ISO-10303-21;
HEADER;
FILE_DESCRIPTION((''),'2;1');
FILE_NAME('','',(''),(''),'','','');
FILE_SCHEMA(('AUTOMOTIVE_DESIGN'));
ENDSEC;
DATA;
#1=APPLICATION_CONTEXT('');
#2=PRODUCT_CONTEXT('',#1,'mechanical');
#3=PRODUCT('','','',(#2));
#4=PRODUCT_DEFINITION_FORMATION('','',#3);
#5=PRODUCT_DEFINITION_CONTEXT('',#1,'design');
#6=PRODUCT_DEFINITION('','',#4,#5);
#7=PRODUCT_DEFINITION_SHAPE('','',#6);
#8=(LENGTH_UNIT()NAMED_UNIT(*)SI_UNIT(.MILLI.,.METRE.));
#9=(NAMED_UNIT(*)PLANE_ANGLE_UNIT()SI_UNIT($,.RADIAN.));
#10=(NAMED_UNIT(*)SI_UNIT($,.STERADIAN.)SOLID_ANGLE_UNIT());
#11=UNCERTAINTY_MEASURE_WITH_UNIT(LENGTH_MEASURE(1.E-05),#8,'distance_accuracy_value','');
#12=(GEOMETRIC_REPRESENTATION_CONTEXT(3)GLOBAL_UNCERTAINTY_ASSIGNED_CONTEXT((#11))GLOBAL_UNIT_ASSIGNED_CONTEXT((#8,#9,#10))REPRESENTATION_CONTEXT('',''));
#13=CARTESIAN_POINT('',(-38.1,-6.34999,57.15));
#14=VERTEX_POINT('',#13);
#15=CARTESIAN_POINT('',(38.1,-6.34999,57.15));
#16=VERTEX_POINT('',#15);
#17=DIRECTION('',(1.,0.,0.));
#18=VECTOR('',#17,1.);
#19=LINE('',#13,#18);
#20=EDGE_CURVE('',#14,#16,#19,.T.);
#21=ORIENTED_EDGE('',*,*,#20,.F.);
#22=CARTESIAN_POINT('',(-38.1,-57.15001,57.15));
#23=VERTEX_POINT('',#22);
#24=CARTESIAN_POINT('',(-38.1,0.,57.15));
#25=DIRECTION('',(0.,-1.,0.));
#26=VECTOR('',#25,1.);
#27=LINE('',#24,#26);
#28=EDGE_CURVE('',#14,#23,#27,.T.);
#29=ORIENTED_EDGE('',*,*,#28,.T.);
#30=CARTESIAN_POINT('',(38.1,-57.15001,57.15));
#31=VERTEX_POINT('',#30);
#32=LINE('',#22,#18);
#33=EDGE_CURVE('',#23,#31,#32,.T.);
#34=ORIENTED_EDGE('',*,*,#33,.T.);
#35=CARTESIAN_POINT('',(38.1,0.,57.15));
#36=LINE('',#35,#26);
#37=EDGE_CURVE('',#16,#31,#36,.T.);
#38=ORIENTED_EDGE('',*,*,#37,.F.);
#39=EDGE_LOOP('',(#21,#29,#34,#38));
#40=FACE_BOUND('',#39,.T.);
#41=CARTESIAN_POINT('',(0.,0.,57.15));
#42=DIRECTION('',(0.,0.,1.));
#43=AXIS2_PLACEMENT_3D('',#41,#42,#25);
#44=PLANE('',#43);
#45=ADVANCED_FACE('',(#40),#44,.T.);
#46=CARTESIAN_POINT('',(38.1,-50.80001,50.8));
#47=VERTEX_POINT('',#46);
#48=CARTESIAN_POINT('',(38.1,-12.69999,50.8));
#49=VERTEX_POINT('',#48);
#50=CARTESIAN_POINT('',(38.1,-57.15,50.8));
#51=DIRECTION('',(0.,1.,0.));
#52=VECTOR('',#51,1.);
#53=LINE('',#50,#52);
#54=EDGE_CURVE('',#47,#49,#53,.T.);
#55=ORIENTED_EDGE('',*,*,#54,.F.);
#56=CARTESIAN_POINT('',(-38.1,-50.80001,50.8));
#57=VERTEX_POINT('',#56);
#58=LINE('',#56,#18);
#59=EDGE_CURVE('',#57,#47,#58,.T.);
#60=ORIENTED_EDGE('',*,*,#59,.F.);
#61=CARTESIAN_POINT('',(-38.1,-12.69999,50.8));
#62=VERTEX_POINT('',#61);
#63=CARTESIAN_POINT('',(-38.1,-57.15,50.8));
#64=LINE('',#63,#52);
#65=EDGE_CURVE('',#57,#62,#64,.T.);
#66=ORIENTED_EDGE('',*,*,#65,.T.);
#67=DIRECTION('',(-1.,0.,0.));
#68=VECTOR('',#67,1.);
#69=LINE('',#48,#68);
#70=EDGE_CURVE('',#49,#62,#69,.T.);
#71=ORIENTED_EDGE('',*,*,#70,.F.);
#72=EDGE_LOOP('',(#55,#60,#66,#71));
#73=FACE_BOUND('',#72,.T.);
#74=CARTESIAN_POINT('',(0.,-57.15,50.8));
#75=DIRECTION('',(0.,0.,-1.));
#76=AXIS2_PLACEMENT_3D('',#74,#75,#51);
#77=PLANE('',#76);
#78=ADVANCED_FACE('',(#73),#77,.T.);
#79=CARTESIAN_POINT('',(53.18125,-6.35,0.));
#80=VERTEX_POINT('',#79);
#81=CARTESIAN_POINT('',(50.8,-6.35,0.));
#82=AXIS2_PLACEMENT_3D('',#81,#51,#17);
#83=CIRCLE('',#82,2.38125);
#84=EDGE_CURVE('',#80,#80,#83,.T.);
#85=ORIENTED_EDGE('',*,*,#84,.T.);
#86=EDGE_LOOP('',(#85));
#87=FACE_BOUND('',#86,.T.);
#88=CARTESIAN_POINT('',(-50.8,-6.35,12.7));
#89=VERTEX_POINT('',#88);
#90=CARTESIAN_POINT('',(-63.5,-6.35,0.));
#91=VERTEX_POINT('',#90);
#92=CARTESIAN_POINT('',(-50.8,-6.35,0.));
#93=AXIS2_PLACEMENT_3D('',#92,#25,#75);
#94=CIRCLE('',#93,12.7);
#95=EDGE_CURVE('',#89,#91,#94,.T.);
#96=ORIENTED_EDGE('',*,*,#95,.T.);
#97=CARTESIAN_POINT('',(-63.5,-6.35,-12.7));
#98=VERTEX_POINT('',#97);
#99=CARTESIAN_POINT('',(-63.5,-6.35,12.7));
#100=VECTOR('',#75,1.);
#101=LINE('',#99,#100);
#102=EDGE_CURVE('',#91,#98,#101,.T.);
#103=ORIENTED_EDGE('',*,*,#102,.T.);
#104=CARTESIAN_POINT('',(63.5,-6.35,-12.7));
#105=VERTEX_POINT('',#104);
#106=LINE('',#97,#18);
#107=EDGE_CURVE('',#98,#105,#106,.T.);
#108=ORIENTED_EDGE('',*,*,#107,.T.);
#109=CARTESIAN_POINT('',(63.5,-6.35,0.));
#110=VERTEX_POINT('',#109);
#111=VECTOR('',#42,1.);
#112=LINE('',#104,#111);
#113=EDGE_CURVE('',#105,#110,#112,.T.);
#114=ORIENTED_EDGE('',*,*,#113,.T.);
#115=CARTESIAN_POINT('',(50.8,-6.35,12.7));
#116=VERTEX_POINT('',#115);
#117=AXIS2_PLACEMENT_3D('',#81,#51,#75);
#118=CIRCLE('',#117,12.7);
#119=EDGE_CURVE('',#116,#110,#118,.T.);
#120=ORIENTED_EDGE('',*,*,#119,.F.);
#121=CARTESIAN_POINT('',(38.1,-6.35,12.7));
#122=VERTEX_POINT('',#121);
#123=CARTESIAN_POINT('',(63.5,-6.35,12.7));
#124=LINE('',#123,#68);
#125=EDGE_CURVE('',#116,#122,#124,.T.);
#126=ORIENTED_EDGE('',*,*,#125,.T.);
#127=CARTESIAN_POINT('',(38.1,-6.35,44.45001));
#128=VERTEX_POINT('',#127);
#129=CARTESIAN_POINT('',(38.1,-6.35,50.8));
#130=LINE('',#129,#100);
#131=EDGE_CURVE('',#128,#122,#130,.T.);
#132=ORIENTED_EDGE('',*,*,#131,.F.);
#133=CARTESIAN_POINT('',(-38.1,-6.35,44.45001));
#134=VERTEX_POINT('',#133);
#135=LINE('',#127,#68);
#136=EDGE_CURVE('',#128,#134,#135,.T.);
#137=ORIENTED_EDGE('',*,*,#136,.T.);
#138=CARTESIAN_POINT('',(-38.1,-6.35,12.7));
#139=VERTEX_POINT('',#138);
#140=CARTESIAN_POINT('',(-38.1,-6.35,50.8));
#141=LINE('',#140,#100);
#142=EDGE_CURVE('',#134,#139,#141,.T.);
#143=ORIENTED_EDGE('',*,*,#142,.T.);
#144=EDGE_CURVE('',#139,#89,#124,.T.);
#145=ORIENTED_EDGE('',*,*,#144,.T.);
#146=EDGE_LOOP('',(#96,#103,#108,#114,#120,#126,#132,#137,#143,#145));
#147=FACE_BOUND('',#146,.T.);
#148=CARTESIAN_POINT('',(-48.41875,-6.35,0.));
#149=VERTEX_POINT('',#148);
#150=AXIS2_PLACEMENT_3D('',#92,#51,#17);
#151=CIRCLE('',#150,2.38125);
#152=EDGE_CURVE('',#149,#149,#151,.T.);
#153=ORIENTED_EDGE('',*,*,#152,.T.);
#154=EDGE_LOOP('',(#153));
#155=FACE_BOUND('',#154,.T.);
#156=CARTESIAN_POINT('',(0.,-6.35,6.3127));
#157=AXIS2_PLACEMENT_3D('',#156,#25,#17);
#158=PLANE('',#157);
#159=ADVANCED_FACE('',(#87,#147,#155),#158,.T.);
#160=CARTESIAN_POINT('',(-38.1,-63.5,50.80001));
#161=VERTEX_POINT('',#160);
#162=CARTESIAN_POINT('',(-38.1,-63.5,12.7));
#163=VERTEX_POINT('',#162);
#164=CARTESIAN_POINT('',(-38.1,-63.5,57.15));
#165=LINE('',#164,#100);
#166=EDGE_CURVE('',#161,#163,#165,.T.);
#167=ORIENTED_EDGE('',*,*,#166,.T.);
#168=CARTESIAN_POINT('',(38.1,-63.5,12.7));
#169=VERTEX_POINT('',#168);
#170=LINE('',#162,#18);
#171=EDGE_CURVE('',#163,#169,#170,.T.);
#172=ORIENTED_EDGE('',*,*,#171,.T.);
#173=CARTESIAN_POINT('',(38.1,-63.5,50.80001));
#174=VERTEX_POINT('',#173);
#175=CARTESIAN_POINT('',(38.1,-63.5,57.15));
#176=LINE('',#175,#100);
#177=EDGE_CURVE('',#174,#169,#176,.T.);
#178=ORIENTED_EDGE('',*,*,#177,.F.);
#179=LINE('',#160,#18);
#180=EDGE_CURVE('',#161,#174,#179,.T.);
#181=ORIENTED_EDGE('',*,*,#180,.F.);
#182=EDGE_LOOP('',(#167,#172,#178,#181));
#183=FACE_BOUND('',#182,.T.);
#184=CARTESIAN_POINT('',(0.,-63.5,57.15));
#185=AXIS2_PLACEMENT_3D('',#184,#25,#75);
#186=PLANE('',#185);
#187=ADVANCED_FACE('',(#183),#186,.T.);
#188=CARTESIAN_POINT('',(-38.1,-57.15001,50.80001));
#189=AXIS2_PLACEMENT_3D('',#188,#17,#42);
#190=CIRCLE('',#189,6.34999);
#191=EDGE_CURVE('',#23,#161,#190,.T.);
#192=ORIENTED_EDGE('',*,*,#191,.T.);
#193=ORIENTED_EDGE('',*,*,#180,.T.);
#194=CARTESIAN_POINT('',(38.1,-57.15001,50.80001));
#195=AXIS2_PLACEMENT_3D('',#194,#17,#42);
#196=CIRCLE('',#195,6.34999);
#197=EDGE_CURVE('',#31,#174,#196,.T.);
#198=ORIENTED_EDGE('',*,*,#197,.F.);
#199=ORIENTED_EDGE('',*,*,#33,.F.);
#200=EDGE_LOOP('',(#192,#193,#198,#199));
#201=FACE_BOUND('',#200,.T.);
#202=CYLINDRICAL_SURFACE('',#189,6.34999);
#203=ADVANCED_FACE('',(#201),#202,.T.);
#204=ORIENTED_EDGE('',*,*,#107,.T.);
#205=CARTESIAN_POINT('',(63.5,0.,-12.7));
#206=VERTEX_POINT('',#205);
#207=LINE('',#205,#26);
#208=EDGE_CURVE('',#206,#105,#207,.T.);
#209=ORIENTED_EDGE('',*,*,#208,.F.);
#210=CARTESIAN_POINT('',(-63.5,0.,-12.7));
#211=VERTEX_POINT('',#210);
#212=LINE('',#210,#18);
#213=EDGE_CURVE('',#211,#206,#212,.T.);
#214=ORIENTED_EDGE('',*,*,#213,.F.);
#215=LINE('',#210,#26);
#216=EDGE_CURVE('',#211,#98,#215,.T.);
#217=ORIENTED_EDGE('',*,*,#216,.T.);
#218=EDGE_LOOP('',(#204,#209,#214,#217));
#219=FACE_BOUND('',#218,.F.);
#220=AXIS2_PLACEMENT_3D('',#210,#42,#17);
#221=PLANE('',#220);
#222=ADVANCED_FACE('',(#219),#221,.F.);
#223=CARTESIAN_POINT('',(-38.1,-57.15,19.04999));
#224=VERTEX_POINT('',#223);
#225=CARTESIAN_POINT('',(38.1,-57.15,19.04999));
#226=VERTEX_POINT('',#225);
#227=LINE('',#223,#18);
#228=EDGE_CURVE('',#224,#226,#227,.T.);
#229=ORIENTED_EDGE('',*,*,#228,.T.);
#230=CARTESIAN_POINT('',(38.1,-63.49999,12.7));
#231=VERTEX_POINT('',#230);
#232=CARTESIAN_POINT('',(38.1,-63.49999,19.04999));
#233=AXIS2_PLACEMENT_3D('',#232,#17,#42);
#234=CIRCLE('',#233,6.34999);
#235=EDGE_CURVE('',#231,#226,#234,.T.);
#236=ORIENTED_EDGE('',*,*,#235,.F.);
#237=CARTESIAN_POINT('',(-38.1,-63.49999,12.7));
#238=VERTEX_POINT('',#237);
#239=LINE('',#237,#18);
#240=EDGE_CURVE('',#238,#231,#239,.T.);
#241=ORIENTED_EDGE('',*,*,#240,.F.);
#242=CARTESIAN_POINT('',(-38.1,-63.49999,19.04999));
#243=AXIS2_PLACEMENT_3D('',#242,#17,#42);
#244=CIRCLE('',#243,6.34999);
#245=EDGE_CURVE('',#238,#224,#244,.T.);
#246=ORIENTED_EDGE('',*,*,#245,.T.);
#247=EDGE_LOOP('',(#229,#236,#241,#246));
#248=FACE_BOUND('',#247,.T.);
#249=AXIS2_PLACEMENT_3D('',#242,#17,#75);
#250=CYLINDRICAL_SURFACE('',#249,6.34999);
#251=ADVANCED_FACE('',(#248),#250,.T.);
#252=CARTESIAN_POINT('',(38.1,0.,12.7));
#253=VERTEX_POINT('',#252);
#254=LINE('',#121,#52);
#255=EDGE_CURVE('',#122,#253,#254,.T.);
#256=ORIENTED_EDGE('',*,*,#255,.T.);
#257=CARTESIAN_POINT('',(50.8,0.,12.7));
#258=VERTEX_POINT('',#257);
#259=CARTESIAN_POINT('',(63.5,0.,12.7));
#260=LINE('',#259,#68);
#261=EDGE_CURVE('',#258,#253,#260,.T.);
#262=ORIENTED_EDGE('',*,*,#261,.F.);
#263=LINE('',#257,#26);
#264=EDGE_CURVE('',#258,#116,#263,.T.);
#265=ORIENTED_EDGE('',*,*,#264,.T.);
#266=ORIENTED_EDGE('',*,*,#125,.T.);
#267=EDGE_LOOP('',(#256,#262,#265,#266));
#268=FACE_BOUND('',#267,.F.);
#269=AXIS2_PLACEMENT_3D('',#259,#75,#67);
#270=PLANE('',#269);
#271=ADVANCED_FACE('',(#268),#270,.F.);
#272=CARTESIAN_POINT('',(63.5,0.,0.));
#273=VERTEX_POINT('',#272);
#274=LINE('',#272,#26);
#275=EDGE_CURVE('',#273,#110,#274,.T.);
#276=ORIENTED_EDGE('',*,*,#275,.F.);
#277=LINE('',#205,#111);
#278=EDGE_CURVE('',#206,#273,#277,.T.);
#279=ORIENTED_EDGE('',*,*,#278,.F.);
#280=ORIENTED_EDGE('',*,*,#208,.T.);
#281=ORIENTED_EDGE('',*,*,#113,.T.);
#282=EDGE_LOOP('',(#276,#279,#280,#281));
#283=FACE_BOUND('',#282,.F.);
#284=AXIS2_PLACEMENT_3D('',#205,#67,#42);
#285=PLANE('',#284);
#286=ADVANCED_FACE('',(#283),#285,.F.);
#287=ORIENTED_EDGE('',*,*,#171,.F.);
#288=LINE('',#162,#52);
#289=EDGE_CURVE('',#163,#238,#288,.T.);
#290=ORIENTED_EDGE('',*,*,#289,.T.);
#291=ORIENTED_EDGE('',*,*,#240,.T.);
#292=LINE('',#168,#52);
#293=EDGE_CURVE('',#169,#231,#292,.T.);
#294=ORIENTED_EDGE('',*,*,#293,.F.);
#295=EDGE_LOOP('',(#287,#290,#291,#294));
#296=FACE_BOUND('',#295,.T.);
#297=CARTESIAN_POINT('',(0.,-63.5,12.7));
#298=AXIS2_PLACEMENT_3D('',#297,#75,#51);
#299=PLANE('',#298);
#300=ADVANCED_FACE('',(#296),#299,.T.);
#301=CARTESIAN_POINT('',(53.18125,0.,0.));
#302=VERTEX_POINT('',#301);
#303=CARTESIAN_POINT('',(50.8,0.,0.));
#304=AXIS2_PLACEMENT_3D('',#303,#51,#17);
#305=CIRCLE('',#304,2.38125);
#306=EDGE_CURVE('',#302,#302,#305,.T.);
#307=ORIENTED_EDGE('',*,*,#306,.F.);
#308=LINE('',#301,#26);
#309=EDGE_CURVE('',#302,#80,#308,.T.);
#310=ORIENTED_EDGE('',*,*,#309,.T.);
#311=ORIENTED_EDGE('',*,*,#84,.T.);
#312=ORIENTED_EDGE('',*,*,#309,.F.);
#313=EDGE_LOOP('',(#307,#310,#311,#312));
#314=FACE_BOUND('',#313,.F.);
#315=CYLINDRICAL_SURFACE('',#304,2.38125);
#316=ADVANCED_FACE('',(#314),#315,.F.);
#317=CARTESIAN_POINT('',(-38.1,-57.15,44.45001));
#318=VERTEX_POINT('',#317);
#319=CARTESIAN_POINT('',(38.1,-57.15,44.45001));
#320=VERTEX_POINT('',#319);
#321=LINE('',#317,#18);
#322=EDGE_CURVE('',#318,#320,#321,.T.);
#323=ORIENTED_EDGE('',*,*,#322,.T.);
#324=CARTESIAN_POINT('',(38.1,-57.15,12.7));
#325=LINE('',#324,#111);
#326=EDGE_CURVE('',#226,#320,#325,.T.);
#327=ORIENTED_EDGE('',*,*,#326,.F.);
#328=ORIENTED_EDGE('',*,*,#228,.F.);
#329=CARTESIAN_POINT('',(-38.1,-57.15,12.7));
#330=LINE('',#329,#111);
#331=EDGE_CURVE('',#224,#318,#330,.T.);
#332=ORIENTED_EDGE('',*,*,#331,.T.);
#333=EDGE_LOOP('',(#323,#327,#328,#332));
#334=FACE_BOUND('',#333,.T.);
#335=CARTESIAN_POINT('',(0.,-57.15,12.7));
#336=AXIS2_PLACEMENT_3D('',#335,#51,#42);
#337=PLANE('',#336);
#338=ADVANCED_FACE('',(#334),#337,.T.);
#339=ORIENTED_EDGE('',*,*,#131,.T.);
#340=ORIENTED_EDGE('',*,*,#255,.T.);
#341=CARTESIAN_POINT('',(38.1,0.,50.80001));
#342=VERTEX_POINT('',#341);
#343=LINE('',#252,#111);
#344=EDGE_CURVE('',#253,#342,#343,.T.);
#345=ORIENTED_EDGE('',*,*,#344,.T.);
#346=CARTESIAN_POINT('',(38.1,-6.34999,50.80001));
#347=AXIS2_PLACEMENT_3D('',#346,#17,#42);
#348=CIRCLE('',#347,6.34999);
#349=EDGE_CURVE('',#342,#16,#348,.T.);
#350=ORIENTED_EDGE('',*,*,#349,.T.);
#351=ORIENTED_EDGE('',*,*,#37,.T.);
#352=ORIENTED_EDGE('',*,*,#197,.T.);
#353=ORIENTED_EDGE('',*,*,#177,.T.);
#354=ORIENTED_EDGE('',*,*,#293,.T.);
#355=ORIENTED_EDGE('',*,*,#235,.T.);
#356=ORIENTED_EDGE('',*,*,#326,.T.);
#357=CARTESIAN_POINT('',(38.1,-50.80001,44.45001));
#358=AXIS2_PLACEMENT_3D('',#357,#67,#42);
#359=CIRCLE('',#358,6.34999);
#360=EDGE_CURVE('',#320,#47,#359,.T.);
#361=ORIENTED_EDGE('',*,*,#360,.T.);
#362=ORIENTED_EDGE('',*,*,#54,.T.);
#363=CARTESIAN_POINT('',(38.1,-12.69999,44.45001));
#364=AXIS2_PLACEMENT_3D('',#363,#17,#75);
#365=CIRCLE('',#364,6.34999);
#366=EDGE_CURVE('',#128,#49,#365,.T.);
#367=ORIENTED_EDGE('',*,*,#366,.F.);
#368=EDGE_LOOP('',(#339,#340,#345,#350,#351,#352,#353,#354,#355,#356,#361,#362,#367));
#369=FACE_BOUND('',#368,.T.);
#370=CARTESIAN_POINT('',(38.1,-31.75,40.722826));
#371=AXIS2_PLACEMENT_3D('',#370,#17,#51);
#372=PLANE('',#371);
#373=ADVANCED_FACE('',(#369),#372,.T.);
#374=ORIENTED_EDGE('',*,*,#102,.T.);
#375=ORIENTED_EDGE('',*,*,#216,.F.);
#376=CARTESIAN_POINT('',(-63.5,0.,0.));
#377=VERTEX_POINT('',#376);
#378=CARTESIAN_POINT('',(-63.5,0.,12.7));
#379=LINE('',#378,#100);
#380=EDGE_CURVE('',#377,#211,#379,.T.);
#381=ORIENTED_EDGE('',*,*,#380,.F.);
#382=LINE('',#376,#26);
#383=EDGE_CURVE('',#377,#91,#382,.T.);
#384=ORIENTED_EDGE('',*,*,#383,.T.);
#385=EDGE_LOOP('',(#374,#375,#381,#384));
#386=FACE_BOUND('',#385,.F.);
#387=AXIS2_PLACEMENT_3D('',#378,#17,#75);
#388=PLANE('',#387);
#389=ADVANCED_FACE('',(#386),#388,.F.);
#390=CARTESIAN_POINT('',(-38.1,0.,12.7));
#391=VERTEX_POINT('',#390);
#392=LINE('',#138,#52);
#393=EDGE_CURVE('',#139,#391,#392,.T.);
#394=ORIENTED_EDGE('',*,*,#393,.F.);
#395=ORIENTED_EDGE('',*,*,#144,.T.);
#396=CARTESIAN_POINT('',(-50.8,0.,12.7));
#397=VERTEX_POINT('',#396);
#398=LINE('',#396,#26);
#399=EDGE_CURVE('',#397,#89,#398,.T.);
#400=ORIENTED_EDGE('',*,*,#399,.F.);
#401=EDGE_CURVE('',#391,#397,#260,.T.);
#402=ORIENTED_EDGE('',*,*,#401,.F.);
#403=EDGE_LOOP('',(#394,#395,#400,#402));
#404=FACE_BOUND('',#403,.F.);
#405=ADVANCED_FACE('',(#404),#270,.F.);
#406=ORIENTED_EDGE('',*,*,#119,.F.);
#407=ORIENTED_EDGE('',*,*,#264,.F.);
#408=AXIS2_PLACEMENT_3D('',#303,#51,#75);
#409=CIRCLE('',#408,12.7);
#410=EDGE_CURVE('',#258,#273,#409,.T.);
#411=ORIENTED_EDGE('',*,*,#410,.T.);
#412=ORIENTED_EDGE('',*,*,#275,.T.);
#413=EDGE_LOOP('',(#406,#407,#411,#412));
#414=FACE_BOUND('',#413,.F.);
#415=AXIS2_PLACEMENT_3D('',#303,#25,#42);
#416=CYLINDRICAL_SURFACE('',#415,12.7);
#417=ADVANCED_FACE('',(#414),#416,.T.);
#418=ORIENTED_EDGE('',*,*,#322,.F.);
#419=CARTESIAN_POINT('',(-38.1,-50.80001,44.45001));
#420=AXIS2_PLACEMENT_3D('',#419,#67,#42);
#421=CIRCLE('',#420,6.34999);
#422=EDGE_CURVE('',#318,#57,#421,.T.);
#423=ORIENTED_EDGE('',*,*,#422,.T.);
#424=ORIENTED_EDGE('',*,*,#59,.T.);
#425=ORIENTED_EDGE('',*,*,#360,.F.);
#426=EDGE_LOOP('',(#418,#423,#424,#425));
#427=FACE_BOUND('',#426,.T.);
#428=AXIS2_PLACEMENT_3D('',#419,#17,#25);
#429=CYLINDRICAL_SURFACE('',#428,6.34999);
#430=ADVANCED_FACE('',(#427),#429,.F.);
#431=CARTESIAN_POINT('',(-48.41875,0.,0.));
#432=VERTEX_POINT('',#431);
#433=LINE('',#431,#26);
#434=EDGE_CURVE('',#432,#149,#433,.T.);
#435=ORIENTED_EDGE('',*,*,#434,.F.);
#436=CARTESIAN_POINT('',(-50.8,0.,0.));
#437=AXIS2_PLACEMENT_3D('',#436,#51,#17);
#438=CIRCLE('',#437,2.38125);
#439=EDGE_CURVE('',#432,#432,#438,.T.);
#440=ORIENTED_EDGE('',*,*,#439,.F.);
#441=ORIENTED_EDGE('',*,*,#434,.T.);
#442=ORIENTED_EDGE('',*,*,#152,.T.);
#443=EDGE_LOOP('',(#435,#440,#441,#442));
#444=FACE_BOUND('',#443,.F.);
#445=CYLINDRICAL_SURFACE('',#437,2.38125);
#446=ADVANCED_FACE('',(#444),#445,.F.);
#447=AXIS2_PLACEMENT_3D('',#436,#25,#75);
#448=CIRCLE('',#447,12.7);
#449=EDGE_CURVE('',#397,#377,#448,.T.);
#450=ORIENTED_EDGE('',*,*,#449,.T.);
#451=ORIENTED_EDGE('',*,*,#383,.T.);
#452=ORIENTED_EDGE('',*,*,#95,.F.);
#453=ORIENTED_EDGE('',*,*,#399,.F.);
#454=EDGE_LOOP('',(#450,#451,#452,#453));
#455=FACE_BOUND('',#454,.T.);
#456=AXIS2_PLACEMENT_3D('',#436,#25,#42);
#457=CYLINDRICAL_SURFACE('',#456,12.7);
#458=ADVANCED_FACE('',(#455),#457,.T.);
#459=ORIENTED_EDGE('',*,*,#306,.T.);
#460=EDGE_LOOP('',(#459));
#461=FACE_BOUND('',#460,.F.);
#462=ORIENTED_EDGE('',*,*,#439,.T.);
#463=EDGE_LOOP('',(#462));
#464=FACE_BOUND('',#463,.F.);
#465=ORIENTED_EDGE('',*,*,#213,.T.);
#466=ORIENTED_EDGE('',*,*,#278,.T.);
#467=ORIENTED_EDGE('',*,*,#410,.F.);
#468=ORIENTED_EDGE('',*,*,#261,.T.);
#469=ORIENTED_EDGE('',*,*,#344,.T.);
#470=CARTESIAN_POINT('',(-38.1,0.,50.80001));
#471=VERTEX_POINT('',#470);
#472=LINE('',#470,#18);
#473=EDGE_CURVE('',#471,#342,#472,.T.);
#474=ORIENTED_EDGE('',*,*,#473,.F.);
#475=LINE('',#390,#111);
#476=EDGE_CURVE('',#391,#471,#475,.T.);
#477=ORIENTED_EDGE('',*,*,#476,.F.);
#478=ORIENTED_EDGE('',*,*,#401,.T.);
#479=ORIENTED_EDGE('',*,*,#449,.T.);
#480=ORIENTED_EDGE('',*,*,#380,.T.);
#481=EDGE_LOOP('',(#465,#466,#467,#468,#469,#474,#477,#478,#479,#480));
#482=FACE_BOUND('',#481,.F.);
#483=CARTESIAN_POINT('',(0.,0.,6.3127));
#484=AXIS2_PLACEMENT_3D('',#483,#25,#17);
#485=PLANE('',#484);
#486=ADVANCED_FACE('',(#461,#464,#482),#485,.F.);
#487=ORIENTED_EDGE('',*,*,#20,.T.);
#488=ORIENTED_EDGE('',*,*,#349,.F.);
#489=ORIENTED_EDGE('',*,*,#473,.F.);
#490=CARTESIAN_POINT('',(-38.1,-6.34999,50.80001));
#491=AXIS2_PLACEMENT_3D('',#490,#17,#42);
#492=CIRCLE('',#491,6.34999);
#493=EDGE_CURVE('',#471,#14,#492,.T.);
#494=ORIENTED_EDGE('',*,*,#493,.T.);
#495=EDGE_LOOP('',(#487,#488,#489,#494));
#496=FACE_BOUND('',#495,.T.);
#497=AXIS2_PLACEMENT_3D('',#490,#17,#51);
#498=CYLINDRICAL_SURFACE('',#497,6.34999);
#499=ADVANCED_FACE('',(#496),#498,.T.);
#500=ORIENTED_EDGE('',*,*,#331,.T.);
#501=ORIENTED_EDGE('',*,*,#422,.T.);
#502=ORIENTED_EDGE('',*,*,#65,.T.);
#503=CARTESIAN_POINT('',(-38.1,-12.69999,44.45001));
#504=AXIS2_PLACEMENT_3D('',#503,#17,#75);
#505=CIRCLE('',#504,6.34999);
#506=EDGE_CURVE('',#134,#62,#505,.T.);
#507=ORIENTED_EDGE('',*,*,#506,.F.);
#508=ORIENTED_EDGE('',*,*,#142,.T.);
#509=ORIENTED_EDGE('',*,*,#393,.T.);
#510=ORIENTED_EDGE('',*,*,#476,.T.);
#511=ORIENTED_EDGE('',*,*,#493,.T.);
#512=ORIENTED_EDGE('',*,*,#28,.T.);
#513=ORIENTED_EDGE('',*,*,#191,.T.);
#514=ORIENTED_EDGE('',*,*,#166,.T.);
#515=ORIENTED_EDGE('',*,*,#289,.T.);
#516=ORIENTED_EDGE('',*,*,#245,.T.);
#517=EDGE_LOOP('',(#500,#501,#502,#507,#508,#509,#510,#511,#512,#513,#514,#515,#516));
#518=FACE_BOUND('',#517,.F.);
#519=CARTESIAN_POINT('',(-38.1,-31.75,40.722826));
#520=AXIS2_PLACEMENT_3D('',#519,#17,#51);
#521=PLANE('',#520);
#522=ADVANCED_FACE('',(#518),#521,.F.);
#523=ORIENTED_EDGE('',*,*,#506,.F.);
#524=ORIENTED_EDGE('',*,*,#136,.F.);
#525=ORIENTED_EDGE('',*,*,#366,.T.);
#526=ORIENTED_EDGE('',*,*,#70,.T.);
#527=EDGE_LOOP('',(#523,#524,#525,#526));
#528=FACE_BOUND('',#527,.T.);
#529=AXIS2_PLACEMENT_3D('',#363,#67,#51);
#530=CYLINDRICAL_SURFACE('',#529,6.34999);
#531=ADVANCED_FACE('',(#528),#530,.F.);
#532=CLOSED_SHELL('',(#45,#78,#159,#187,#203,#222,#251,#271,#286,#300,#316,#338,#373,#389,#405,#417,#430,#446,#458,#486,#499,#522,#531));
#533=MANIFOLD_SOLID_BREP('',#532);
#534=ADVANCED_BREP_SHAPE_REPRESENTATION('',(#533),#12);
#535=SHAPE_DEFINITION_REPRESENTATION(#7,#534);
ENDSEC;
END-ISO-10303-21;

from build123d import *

# Parameters (mm, degrees)
F1_DEPTH = 6.35
F2_R     = 12.7
F4_DEPTH = 38.1
F5_R     = 6.34999


# Not quite as in the source:
# - a fillet or chamfer is up to 0.001 mm smaller than in the source, because OpenCascade refuses the exact size


with BuildPart() as f1:
    # F0 (on Front) → F1 (new body)
    with BuildSketch(Plane.XZ):
        with BuildLine():
            Line((63.5, 0), (63.5, 12.7))
            Line((63.5, 12.7), (-63.5, 12.7))
            Line((-63.5, 12.7), (-63.5, 0))
            Line((-63.5, 0), (-53.18125, 0))
            ThreePointArc((-53.18125, 0), (-50.8, 2.38125), (-48.41875, 0))
            Line((-48.41875, 0), (48.41875, 0))
            ThreePointArc((48.41875, 0), (50.8, 2.38125), (53.18125, 0))
            Line((53.18125, 0), (63.5, 0))
        make_face()
        with BuildLine():
            Line((63.5, -12.7), (63.5, 0))
            Line((63.5, 0), (53.18125, 0))
            ThreePointArc((53.18125, 0), (50.8, -2.38125), (48.41875, 0))
            Line((48.41875, 0), (-48.41875, 0))
            ThreePointArc((-48.41875, 0), (-50.8, -2.38125), (-53.18125, 0))
            Line((-53.18125, 0), (-63.5, 0))
            Line((-63.5, 0), (-63.5, -12.7))
            Line((-63.5, -12.7), (63.5, -12.7))
        make_face()
    extrude(amount=F1_DEPTH)

    # F2
    f2_edges = [f1.edges().sort_by_distance(p)[0] for p in [
        (-63.5, -3.175, 12.7),
        (63.5, -3.175, 12.7),
    ]]
    fillet(f2_edges, radius=F2_R)

    # F3 (on Right) → F4 (join, symmetric)
    with BuildSketch(Plane.YZ):
        Polygon((0, 12.7), (0, 57.15), (-63.5, 57.15), (-63.5, 12.7), (-57.15, 12.7), (-57.15, 50.8), (-6.35, 50.8), (-6.35, 12.7), align=None)
    extrude(amount=F4_DEPTH, both=True)

    # F5 (radius 6.35 in the source; OpenCascade refuses exactly that, so slightly less here)
    f5_edges = [f1.edges().sort_by_distance(p)[0] for p in [
        (0, 0, 57.15),
        (0, -63.5, 57.15),
        (0, -6.35, 50.8),
        (0, -57.15, 50.8),
        (0, -57.15, 12.7),
    ]]
    fillet(f5_edges, radius=F5_R)


solid = f1.part
